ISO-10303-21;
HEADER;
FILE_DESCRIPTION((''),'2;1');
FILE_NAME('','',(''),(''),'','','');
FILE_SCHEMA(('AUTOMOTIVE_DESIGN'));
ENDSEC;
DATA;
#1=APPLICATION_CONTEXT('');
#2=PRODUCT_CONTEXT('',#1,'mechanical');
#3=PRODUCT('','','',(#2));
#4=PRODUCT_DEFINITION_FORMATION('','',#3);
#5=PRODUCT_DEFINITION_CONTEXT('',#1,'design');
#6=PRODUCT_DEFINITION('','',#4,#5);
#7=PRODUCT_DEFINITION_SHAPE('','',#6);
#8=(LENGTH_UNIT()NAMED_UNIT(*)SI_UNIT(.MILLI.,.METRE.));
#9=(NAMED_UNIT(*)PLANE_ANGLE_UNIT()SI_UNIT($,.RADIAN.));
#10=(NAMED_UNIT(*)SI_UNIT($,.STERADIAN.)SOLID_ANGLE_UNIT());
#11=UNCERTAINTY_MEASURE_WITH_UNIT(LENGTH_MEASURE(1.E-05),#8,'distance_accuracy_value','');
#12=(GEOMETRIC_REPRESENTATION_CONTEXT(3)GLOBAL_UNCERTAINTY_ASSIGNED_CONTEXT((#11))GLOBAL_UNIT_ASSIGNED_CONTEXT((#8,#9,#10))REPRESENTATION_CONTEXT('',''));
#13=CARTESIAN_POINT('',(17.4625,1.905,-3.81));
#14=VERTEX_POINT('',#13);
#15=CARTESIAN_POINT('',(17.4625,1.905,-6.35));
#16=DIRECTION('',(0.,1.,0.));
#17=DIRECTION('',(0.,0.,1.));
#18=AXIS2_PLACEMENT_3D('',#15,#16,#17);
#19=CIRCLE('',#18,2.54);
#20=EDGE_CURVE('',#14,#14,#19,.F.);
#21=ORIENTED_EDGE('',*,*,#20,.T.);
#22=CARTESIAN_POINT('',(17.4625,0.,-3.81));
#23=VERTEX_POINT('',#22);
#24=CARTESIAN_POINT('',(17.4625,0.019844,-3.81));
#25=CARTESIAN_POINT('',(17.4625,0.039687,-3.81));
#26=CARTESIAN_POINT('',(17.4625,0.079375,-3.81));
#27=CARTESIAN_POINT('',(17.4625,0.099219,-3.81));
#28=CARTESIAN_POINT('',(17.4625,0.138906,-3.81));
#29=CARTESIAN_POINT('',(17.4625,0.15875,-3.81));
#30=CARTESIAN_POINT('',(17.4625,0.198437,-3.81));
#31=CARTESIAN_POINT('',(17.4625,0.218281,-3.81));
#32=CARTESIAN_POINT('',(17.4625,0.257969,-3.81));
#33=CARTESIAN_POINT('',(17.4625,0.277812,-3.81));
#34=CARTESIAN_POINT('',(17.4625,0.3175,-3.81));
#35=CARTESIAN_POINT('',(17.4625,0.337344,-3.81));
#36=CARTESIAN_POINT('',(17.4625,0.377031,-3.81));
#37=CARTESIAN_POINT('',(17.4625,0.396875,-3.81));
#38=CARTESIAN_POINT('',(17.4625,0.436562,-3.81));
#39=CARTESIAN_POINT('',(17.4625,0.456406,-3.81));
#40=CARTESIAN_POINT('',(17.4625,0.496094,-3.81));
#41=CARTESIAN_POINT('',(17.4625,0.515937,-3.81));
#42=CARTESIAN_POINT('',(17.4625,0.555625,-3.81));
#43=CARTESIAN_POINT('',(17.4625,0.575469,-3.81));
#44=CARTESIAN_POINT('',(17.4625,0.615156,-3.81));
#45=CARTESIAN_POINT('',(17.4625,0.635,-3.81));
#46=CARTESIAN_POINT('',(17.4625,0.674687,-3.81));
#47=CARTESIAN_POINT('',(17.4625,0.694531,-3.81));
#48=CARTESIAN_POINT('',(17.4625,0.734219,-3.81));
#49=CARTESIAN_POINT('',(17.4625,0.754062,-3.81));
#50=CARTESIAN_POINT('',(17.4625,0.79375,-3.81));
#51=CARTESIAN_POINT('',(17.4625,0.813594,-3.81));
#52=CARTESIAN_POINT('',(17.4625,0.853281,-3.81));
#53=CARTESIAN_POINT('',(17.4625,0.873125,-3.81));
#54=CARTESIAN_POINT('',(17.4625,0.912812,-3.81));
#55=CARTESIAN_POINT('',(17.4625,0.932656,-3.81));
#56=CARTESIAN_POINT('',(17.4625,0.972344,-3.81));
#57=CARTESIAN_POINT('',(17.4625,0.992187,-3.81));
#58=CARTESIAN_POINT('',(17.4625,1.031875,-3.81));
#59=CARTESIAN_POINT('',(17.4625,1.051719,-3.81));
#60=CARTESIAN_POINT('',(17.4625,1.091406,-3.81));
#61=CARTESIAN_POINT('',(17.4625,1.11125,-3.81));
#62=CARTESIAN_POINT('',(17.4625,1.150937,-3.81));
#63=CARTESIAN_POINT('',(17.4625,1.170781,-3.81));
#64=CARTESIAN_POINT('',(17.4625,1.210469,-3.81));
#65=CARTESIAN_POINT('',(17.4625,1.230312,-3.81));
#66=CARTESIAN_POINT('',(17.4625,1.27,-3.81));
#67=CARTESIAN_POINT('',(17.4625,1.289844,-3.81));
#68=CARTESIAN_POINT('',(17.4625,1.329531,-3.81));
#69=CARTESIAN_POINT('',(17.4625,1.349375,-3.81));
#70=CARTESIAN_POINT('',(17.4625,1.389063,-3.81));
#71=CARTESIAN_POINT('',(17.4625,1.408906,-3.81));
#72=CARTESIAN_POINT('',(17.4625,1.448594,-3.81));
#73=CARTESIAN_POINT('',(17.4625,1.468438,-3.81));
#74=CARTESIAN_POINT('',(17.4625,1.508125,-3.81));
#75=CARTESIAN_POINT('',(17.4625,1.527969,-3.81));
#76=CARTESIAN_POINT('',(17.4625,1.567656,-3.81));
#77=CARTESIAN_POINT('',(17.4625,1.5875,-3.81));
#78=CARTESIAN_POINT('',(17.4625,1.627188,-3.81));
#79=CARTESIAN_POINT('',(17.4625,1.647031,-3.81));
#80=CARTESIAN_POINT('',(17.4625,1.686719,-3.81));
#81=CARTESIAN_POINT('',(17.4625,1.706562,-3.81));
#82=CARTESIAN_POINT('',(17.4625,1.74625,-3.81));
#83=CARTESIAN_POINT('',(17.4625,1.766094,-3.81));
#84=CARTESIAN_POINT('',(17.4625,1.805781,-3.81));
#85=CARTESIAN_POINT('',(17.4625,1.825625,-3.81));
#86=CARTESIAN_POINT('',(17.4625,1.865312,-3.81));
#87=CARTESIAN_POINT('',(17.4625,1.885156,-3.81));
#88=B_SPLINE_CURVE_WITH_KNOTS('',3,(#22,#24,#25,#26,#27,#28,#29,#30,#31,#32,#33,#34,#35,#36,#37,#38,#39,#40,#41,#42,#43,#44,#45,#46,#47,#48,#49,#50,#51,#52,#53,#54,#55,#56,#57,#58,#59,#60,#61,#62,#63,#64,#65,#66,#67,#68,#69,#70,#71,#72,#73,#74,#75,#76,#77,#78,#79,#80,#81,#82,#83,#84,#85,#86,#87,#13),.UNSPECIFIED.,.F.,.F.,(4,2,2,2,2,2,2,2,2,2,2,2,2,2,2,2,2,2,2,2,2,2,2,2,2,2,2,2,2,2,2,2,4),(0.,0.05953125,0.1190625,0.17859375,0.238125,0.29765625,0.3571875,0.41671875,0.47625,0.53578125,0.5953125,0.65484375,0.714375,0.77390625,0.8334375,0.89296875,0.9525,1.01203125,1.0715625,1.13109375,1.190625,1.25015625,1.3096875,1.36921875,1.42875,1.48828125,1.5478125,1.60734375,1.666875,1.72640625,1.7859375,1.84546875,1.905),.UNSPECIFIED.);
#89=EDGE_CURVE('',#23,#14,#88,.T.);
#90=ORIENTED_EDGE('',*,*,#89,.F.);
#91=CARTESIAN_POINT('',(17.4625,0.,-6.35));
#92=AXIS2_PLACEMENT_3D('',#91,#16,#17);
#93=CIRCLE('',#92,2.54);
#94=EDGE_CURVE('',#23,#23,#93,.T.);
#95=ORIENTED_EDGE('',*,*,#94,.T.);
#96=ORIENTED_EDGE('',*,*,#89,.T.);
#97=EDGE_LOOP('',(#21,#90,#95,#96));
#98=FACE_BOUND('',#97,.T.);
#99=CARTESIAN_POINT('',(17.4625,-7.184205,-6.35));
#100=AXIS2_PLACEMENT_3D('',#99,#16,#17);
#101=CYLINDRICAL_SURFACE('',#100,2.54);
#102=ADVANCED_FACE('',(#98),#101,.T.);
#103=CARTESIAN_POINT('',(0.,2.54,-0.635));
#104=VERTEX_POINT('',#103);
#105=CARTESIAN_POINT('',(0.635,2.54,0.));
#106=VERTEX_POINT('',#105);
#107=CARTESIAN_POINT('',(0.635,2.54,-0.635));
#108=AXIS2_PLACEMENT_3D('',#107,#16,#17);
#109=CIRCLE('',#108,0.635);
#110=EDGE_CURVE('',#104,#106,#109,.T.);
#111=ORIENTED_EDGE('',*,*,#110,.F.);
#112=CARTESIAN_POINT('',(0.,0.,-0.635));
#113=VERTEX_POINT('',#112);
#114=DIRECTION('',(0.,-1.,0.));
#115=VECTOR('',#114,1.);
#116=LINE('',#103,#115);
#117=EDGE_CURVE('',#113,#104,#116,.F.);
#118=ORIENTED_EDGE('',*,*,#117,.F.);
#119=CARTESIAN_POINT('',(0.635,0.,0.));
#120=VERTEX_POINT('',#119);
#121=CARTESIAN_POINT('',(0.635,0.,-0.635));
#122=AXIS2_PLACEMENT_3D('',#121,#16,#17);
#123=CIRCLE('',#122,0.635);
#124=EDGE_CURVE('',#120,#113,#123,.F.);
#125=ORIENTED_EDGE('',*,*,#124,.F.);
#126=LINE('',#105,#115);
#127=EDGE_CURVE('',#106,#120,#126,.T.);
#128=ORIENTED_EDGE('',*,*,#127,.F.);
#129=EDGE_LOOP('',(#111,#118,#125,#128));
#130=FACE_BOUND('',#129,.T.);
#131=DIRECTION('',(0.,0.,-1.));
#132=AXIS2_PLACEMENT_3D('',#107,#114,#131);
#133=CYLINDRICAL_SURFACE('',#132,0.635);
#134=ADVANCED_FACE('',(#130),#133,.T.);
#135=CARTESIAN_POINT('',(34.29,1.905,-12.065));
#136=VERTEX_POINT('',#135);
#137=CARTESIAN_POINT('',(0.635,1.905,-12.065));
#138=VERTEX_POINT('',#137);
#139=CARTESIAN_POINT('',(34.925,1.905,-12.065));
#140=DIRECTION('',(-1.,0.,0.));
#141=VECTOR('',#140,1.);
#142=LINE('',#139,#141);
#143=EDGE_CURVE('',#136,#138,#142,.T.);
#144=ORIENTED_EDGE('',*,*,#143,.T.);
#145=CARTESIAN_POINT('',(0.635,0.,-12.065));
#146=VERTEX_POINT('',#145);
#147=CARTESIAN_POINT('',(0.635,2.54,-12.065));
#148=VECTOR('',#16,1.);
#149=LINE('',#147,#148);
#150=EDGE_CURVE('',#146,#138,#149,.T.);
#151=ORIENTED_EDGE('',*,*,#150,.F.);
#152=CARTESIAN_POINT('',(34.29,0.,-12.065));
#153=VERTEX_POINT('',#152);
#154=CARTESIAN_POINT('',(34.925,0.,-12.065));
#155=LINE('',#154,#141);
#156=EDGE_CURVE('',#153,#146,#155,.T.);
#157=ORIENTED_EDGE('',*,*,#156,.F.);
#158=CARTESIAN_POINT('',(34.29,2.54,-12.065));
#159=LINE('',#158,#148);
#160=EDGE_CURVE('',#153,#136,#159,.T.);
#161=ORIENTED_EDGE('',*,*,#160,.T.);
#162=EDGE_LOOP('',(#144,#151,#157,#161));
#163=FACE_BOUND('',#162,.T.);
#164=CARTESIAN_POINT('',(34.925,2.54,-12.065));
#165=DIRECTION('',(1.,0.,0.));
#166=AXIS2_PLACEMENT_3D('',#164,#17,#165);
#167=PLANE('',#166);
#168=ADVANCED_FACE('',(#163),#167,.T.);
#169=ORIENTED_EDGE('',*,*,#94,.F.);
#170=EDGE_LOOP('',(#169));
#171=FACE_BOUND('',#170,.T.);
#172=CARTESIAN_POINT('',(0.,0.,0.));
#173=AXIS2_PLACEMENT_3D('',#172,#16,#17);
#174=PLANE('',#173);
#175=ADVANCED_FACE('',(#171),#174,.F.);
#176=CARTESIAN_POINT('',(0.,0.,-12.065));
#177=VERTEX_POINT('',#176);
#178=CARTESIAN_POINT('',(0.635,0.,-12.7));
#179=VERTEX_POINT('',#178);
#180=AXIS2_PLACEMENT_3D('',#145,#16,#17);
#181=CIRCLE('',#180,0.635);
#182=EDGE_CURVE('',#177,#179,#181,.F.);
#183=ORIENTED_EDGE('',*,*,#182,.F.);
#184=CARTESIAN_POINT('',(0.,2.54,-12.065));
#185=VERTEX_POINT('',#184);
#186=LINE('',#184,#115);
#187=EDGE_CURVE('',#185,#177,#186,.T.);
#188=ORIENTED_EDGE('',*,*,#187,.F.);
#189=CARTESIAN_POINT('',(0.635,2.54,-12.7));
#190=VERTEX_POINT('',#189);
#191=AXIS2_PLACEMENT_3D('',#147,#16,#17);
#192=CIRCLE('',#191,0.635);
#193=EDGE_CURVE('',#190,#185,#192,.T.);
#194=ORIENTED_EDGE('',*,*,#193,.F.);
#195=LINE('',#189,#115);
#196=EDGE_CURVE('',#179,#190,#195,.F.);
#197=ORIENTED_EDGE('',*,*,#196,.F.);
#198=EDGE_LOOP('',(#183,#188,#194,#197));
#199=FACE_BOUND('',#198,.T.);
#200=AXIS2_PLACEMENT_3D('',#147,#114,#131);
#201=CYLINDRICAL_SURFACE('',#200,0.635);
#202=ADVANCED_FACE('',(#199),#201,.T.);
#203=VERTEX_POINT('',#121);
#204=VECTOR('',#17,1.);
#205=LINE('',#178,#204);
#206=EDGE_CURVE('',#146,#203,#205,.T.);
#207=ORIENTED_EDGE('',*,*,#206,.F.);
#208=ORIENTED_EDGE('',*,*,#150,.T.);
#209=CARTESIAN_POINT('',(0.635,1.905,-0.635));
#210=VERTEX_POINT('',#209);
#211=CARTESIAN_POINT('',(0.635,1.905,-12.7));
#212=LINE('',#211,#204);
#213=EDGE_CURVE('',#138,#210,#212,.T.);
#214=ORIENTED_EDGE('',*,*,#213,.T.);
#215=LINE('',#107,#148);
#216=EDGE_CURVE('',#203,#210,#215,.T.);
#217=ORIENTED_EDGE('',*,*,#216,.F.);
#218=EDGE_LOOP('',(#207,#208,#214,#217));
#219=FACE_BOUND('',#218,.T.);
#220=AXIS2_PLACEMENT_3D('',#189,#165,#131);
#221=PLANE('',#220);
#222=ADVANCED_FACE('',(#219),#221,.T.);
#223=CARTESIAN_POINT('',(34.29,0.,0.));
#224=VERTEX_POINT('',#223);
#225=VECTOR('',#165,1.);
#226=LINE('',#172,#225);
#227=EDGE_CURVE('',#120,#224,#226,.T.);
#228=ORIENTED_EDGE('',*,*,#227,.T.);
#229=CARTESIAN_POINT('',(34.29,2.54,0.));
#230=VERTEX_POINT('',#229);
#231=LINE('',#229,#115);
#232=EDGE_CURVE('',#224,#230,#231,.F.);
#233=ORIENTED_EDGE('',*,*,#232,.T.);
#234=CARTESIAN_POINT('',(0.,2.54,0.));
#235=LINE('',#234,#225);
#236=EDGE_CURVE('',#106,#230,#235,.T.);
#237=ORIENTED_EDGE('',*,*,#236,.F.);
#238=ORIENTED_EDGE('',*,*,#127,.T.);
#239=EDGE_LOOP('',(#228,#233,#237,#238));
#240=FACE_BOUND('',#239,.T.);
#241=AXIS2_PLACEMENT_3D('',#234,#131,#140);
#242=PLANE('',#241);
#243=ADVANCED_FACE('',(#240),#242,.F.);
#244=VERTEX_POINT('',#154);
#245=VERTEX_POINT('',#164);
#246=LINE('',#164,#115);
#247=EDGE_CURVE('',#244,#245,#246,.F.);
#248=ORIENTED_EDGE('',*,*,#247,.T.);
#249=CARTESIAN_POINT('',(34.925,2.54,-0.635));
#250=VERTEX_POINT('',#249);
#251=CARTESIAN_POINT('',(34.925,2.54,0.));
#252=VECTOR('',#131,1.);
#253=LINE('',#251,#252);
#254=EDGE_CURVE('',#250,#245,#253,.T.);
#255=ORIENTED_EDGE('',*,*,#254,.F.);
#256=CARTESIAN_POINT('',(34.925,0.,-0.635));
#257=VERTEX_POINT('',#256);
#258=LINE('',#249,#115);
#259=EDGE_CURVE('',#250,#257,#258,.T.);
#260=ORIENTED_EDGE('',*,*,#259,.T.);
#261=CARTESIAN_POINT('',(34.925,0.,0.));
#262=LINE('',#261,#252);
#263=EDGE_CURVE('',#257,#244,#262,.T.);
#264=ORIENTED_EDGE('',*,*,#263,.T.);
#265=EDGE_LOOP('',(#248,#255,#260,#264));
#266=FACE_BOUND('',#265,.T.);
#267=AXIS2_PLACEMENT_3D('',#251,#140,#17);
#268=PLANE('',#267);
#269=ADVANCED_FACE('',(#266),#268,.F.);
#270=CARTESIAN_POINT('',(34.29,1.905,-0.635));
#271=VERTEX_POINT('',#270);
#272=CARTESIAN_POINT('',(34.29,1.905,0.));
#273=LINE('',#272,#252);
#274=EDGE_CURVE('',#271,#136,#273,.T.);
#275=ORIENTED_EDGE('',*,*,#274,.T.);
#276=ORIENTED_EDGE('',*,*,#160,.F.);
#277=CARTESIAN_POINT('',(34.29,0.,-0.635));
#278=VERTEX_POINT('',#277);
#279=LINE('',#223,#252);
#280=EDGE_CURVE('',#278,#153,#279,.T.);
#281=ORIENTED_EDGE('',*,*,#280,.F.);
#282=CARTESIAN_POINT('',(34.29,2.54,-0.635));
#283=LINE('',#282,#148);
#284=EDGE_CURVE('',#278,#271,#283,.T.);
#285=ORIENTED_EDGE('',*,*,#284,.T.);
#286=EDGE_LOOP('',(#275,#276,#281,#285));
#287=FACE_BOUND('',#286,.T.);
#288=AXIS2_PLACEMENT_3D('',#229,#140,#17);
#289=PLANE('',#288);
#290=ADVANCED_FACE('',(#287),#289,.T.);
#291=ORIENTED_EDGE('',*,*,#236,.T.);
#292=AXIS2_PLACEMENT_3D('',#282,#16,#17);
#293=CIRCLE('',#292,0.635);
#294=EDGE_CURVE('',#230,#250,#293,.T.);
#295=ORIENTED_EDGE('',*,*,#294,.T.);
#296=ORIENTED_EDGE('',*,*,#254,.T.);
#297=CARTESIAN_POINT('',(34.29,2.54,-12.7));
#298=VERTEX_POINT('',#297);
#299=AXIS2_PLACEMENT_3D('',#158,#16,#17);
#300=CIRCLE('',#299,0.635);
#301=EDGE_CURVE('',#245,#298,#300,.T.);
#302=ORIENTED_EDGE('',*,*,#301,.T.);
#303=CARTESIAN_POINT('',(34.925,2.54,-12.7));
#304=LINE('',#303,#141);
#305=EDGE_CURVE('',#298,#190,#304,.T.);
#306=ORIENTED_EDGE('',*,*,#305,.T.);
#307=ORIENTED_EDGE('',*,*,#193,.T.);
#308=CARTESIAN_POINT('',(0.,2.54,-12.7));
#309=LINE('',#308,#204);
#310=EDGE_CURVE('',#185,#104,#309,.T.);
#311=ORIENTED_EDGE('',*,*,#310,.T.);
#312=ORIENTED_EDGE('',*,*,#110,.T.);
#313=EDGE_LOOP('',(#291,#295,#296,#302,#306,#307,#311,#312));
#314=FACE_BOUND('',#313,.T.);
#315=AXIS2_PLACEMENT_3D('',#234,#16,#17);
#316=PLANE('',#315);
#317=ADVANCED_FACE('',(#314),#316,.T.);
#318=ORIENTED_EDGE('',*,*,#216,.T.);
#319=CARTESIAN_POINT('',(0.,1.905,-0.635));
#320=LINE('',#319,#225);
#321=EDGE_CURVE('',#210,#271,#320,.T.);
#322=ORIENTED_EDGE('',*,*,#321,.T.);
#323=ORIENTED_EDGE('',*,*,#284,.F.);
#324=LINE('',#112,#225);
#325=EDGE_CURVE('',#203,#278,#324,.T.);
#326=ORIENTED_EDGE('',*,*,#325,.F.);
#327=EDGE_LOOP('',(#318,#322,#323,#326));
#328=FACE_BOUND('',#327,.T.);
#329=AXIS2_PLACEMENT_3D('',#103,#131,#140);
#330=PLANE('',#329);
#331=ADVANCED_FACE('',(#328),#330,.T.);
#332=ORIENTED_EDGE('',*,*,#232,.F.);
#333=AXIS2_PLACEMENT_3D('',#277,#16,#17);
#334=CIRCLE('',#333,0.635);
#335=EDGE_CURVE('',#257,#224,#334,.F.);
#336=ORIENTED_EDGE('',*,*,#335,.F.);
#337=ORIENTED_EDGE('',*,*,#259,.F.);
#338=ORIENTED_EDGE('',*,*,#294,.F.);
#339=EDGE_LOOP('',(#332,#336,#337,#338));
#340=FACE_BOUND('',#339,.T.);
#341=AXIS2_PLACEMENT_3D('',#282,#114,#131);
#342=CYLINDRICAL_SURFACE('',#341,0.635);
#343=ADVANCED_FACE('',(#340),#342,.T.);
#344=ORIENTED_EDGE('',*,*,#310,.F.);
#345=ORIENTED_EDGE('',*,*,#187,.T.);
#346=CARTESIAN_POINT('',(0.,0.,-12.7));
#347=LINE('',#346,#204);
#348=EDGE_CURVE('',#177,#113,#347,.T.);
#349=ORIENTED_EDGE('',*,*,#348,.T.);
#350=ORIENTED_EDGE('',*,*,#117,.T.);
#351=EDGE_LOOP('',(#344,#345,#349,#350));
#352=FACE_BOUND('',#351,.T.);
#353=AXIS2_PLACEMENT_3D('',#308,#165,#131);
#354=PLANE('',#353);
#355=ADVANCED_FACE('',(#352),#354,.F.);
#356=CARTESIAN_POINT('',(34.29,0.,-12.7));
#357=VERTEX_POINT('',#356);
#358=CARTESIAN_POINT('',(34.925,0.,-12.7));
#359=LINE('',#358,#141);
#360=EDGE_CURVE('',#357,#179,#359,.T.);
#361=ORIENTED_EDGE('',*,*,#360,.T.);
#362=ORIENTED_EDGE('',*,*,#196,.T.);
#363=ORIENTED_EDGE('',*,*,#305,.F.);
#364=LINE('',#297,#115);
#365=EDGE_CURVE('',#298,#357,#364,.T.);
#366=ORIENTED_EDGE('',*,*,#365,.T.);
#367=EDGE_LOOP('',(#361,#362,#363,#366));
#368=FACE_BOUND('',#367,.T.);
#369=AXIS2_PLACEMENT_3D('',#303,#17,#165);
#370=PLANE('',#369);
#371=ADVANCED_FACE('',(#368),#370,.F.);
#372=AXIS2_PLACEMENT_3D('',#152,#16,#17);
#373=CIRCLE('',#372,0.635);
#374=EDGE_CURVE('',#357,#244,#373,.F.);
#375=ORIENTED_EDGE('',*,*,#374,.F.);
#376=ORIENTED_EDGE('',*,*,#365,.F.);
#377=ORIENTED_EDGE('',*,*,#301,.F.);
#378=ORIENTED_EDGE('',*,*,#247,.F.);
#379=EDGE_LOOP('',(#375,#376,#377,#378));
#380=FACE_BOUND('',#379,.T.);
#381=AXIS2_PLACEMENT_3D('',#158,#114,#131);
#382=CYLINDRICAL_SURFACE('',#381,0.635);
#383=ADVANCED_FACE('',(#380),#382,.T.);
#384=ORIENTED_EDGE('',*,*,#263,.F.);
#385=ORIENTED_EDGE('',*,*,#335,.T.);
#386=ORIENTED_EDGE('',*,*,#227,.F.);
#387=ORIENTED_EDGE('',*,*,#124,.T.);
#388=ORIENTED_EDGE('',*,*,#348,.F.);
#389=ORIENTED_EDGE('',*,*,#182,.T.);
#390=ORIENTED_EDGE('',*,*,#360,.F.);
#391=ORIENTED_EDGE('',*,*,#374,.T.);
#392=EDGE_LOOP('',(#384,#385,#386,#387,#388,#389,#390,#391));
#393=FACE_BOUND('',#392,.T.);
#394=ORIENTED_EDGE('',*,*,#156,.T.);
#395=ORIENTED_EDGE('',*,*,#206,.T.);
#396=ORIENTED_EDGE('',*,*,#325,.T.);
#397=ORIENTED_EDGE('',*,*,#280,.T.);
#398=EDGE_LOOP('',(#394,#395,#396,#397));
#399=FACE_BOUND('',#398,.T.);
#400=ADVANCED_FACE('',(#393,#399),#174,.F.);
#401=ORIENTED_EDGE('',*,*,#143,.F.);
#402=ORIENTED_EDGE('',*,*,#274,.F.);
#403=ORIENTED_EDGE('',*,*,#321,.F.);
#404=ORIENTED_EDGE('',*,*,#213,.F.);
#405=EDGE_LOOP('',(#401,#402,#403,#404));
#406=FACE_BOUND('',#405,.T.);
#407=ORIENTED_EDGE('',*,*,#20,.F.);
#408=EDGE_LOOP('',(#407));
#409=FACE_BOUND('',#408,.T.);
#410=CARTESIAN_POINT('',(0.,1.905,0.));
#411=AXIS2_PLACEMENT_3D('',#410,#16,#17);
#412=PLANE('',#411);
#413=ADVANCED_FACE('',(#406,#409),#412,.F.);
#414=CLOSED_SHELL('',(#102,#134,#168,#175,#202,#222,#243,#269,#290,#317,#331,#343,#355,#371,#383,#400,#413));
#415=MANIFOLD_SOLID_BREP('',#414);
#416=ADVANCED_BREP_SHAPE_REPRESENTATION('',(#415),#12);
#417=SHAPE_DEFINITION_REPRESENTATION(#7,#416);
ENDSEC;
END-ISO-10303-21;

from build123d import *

# Parameters (mm, degrees)
SKETCH1_W           = 34.925
SKETCH1_H           = 12.7
BOSS_EXTRUDE1_DEPTH = 2.54
FILLET1_R           = 0.635
SHELL1_START        = 0.635
SHELL1_OUTLINE_W    = 1.905
SHELL1_OUTLINE_H    = 11.43
SHELL1_DEPTH        = 33.655
SKETCH2_R           = 2.54
BOSS_EXTRUDE2_DEPTH = 1.905


# Read off the part's stored shape, not the designer's step: Shell1
with BuildPart() as part:
    # Sketch1 → Boss-Extrude1 (new body)
    with BuildSketch(Plane(origin=(0, 0, 0), x_dir=(1, 0, 0), z_dir=(0, 1, 0))):
        with Locations((17.4625, 6.35)):
            Rectangle(SKETCH1_W, SKETCH1_H)
    extrude(amount=BOSS_EXTRUDE1_DEPTH)

    # Fillet1
    fillet1_edges = [part.edges().sort_by_distance(p)[0] for p in [
        (0, 1.27, -12.7),
        (34.925, 1.27, -12.7),
        (34.925, 1.27, 0),
        (0, 1.27, 0),
    ]]
    fillet(fillet1_edges, radius=FILLET1_R)

    # Shell1 outline → Shell1 (cut)
    with BuildSketch(Plane.YZ.offset(SHELL1_START)):
        with Locations((0.9525, -6.35)):
            Rectangle(SHELL1_OUTLINE_W, SHELL1_OUTLINE_H)
    extrude(amount=SHELL1_DEPTH, mode=Mode.SUBTRACT)

    # Sketch2 → Boss-Extrude2 (add)
    with BuildSketch(Plane(origin=(0, 1.905, 0), x_dir=(-1, 0, 0), z_dir=(0, -1, 0))):
        with Locations(Location((-17.4625, 6.35, 0), (0, 0, 270))):
            Circle(SKETCH2_R)
    extrude(amount=BOSS_EXTRUDE2_DEPTH)


solid = part.part
